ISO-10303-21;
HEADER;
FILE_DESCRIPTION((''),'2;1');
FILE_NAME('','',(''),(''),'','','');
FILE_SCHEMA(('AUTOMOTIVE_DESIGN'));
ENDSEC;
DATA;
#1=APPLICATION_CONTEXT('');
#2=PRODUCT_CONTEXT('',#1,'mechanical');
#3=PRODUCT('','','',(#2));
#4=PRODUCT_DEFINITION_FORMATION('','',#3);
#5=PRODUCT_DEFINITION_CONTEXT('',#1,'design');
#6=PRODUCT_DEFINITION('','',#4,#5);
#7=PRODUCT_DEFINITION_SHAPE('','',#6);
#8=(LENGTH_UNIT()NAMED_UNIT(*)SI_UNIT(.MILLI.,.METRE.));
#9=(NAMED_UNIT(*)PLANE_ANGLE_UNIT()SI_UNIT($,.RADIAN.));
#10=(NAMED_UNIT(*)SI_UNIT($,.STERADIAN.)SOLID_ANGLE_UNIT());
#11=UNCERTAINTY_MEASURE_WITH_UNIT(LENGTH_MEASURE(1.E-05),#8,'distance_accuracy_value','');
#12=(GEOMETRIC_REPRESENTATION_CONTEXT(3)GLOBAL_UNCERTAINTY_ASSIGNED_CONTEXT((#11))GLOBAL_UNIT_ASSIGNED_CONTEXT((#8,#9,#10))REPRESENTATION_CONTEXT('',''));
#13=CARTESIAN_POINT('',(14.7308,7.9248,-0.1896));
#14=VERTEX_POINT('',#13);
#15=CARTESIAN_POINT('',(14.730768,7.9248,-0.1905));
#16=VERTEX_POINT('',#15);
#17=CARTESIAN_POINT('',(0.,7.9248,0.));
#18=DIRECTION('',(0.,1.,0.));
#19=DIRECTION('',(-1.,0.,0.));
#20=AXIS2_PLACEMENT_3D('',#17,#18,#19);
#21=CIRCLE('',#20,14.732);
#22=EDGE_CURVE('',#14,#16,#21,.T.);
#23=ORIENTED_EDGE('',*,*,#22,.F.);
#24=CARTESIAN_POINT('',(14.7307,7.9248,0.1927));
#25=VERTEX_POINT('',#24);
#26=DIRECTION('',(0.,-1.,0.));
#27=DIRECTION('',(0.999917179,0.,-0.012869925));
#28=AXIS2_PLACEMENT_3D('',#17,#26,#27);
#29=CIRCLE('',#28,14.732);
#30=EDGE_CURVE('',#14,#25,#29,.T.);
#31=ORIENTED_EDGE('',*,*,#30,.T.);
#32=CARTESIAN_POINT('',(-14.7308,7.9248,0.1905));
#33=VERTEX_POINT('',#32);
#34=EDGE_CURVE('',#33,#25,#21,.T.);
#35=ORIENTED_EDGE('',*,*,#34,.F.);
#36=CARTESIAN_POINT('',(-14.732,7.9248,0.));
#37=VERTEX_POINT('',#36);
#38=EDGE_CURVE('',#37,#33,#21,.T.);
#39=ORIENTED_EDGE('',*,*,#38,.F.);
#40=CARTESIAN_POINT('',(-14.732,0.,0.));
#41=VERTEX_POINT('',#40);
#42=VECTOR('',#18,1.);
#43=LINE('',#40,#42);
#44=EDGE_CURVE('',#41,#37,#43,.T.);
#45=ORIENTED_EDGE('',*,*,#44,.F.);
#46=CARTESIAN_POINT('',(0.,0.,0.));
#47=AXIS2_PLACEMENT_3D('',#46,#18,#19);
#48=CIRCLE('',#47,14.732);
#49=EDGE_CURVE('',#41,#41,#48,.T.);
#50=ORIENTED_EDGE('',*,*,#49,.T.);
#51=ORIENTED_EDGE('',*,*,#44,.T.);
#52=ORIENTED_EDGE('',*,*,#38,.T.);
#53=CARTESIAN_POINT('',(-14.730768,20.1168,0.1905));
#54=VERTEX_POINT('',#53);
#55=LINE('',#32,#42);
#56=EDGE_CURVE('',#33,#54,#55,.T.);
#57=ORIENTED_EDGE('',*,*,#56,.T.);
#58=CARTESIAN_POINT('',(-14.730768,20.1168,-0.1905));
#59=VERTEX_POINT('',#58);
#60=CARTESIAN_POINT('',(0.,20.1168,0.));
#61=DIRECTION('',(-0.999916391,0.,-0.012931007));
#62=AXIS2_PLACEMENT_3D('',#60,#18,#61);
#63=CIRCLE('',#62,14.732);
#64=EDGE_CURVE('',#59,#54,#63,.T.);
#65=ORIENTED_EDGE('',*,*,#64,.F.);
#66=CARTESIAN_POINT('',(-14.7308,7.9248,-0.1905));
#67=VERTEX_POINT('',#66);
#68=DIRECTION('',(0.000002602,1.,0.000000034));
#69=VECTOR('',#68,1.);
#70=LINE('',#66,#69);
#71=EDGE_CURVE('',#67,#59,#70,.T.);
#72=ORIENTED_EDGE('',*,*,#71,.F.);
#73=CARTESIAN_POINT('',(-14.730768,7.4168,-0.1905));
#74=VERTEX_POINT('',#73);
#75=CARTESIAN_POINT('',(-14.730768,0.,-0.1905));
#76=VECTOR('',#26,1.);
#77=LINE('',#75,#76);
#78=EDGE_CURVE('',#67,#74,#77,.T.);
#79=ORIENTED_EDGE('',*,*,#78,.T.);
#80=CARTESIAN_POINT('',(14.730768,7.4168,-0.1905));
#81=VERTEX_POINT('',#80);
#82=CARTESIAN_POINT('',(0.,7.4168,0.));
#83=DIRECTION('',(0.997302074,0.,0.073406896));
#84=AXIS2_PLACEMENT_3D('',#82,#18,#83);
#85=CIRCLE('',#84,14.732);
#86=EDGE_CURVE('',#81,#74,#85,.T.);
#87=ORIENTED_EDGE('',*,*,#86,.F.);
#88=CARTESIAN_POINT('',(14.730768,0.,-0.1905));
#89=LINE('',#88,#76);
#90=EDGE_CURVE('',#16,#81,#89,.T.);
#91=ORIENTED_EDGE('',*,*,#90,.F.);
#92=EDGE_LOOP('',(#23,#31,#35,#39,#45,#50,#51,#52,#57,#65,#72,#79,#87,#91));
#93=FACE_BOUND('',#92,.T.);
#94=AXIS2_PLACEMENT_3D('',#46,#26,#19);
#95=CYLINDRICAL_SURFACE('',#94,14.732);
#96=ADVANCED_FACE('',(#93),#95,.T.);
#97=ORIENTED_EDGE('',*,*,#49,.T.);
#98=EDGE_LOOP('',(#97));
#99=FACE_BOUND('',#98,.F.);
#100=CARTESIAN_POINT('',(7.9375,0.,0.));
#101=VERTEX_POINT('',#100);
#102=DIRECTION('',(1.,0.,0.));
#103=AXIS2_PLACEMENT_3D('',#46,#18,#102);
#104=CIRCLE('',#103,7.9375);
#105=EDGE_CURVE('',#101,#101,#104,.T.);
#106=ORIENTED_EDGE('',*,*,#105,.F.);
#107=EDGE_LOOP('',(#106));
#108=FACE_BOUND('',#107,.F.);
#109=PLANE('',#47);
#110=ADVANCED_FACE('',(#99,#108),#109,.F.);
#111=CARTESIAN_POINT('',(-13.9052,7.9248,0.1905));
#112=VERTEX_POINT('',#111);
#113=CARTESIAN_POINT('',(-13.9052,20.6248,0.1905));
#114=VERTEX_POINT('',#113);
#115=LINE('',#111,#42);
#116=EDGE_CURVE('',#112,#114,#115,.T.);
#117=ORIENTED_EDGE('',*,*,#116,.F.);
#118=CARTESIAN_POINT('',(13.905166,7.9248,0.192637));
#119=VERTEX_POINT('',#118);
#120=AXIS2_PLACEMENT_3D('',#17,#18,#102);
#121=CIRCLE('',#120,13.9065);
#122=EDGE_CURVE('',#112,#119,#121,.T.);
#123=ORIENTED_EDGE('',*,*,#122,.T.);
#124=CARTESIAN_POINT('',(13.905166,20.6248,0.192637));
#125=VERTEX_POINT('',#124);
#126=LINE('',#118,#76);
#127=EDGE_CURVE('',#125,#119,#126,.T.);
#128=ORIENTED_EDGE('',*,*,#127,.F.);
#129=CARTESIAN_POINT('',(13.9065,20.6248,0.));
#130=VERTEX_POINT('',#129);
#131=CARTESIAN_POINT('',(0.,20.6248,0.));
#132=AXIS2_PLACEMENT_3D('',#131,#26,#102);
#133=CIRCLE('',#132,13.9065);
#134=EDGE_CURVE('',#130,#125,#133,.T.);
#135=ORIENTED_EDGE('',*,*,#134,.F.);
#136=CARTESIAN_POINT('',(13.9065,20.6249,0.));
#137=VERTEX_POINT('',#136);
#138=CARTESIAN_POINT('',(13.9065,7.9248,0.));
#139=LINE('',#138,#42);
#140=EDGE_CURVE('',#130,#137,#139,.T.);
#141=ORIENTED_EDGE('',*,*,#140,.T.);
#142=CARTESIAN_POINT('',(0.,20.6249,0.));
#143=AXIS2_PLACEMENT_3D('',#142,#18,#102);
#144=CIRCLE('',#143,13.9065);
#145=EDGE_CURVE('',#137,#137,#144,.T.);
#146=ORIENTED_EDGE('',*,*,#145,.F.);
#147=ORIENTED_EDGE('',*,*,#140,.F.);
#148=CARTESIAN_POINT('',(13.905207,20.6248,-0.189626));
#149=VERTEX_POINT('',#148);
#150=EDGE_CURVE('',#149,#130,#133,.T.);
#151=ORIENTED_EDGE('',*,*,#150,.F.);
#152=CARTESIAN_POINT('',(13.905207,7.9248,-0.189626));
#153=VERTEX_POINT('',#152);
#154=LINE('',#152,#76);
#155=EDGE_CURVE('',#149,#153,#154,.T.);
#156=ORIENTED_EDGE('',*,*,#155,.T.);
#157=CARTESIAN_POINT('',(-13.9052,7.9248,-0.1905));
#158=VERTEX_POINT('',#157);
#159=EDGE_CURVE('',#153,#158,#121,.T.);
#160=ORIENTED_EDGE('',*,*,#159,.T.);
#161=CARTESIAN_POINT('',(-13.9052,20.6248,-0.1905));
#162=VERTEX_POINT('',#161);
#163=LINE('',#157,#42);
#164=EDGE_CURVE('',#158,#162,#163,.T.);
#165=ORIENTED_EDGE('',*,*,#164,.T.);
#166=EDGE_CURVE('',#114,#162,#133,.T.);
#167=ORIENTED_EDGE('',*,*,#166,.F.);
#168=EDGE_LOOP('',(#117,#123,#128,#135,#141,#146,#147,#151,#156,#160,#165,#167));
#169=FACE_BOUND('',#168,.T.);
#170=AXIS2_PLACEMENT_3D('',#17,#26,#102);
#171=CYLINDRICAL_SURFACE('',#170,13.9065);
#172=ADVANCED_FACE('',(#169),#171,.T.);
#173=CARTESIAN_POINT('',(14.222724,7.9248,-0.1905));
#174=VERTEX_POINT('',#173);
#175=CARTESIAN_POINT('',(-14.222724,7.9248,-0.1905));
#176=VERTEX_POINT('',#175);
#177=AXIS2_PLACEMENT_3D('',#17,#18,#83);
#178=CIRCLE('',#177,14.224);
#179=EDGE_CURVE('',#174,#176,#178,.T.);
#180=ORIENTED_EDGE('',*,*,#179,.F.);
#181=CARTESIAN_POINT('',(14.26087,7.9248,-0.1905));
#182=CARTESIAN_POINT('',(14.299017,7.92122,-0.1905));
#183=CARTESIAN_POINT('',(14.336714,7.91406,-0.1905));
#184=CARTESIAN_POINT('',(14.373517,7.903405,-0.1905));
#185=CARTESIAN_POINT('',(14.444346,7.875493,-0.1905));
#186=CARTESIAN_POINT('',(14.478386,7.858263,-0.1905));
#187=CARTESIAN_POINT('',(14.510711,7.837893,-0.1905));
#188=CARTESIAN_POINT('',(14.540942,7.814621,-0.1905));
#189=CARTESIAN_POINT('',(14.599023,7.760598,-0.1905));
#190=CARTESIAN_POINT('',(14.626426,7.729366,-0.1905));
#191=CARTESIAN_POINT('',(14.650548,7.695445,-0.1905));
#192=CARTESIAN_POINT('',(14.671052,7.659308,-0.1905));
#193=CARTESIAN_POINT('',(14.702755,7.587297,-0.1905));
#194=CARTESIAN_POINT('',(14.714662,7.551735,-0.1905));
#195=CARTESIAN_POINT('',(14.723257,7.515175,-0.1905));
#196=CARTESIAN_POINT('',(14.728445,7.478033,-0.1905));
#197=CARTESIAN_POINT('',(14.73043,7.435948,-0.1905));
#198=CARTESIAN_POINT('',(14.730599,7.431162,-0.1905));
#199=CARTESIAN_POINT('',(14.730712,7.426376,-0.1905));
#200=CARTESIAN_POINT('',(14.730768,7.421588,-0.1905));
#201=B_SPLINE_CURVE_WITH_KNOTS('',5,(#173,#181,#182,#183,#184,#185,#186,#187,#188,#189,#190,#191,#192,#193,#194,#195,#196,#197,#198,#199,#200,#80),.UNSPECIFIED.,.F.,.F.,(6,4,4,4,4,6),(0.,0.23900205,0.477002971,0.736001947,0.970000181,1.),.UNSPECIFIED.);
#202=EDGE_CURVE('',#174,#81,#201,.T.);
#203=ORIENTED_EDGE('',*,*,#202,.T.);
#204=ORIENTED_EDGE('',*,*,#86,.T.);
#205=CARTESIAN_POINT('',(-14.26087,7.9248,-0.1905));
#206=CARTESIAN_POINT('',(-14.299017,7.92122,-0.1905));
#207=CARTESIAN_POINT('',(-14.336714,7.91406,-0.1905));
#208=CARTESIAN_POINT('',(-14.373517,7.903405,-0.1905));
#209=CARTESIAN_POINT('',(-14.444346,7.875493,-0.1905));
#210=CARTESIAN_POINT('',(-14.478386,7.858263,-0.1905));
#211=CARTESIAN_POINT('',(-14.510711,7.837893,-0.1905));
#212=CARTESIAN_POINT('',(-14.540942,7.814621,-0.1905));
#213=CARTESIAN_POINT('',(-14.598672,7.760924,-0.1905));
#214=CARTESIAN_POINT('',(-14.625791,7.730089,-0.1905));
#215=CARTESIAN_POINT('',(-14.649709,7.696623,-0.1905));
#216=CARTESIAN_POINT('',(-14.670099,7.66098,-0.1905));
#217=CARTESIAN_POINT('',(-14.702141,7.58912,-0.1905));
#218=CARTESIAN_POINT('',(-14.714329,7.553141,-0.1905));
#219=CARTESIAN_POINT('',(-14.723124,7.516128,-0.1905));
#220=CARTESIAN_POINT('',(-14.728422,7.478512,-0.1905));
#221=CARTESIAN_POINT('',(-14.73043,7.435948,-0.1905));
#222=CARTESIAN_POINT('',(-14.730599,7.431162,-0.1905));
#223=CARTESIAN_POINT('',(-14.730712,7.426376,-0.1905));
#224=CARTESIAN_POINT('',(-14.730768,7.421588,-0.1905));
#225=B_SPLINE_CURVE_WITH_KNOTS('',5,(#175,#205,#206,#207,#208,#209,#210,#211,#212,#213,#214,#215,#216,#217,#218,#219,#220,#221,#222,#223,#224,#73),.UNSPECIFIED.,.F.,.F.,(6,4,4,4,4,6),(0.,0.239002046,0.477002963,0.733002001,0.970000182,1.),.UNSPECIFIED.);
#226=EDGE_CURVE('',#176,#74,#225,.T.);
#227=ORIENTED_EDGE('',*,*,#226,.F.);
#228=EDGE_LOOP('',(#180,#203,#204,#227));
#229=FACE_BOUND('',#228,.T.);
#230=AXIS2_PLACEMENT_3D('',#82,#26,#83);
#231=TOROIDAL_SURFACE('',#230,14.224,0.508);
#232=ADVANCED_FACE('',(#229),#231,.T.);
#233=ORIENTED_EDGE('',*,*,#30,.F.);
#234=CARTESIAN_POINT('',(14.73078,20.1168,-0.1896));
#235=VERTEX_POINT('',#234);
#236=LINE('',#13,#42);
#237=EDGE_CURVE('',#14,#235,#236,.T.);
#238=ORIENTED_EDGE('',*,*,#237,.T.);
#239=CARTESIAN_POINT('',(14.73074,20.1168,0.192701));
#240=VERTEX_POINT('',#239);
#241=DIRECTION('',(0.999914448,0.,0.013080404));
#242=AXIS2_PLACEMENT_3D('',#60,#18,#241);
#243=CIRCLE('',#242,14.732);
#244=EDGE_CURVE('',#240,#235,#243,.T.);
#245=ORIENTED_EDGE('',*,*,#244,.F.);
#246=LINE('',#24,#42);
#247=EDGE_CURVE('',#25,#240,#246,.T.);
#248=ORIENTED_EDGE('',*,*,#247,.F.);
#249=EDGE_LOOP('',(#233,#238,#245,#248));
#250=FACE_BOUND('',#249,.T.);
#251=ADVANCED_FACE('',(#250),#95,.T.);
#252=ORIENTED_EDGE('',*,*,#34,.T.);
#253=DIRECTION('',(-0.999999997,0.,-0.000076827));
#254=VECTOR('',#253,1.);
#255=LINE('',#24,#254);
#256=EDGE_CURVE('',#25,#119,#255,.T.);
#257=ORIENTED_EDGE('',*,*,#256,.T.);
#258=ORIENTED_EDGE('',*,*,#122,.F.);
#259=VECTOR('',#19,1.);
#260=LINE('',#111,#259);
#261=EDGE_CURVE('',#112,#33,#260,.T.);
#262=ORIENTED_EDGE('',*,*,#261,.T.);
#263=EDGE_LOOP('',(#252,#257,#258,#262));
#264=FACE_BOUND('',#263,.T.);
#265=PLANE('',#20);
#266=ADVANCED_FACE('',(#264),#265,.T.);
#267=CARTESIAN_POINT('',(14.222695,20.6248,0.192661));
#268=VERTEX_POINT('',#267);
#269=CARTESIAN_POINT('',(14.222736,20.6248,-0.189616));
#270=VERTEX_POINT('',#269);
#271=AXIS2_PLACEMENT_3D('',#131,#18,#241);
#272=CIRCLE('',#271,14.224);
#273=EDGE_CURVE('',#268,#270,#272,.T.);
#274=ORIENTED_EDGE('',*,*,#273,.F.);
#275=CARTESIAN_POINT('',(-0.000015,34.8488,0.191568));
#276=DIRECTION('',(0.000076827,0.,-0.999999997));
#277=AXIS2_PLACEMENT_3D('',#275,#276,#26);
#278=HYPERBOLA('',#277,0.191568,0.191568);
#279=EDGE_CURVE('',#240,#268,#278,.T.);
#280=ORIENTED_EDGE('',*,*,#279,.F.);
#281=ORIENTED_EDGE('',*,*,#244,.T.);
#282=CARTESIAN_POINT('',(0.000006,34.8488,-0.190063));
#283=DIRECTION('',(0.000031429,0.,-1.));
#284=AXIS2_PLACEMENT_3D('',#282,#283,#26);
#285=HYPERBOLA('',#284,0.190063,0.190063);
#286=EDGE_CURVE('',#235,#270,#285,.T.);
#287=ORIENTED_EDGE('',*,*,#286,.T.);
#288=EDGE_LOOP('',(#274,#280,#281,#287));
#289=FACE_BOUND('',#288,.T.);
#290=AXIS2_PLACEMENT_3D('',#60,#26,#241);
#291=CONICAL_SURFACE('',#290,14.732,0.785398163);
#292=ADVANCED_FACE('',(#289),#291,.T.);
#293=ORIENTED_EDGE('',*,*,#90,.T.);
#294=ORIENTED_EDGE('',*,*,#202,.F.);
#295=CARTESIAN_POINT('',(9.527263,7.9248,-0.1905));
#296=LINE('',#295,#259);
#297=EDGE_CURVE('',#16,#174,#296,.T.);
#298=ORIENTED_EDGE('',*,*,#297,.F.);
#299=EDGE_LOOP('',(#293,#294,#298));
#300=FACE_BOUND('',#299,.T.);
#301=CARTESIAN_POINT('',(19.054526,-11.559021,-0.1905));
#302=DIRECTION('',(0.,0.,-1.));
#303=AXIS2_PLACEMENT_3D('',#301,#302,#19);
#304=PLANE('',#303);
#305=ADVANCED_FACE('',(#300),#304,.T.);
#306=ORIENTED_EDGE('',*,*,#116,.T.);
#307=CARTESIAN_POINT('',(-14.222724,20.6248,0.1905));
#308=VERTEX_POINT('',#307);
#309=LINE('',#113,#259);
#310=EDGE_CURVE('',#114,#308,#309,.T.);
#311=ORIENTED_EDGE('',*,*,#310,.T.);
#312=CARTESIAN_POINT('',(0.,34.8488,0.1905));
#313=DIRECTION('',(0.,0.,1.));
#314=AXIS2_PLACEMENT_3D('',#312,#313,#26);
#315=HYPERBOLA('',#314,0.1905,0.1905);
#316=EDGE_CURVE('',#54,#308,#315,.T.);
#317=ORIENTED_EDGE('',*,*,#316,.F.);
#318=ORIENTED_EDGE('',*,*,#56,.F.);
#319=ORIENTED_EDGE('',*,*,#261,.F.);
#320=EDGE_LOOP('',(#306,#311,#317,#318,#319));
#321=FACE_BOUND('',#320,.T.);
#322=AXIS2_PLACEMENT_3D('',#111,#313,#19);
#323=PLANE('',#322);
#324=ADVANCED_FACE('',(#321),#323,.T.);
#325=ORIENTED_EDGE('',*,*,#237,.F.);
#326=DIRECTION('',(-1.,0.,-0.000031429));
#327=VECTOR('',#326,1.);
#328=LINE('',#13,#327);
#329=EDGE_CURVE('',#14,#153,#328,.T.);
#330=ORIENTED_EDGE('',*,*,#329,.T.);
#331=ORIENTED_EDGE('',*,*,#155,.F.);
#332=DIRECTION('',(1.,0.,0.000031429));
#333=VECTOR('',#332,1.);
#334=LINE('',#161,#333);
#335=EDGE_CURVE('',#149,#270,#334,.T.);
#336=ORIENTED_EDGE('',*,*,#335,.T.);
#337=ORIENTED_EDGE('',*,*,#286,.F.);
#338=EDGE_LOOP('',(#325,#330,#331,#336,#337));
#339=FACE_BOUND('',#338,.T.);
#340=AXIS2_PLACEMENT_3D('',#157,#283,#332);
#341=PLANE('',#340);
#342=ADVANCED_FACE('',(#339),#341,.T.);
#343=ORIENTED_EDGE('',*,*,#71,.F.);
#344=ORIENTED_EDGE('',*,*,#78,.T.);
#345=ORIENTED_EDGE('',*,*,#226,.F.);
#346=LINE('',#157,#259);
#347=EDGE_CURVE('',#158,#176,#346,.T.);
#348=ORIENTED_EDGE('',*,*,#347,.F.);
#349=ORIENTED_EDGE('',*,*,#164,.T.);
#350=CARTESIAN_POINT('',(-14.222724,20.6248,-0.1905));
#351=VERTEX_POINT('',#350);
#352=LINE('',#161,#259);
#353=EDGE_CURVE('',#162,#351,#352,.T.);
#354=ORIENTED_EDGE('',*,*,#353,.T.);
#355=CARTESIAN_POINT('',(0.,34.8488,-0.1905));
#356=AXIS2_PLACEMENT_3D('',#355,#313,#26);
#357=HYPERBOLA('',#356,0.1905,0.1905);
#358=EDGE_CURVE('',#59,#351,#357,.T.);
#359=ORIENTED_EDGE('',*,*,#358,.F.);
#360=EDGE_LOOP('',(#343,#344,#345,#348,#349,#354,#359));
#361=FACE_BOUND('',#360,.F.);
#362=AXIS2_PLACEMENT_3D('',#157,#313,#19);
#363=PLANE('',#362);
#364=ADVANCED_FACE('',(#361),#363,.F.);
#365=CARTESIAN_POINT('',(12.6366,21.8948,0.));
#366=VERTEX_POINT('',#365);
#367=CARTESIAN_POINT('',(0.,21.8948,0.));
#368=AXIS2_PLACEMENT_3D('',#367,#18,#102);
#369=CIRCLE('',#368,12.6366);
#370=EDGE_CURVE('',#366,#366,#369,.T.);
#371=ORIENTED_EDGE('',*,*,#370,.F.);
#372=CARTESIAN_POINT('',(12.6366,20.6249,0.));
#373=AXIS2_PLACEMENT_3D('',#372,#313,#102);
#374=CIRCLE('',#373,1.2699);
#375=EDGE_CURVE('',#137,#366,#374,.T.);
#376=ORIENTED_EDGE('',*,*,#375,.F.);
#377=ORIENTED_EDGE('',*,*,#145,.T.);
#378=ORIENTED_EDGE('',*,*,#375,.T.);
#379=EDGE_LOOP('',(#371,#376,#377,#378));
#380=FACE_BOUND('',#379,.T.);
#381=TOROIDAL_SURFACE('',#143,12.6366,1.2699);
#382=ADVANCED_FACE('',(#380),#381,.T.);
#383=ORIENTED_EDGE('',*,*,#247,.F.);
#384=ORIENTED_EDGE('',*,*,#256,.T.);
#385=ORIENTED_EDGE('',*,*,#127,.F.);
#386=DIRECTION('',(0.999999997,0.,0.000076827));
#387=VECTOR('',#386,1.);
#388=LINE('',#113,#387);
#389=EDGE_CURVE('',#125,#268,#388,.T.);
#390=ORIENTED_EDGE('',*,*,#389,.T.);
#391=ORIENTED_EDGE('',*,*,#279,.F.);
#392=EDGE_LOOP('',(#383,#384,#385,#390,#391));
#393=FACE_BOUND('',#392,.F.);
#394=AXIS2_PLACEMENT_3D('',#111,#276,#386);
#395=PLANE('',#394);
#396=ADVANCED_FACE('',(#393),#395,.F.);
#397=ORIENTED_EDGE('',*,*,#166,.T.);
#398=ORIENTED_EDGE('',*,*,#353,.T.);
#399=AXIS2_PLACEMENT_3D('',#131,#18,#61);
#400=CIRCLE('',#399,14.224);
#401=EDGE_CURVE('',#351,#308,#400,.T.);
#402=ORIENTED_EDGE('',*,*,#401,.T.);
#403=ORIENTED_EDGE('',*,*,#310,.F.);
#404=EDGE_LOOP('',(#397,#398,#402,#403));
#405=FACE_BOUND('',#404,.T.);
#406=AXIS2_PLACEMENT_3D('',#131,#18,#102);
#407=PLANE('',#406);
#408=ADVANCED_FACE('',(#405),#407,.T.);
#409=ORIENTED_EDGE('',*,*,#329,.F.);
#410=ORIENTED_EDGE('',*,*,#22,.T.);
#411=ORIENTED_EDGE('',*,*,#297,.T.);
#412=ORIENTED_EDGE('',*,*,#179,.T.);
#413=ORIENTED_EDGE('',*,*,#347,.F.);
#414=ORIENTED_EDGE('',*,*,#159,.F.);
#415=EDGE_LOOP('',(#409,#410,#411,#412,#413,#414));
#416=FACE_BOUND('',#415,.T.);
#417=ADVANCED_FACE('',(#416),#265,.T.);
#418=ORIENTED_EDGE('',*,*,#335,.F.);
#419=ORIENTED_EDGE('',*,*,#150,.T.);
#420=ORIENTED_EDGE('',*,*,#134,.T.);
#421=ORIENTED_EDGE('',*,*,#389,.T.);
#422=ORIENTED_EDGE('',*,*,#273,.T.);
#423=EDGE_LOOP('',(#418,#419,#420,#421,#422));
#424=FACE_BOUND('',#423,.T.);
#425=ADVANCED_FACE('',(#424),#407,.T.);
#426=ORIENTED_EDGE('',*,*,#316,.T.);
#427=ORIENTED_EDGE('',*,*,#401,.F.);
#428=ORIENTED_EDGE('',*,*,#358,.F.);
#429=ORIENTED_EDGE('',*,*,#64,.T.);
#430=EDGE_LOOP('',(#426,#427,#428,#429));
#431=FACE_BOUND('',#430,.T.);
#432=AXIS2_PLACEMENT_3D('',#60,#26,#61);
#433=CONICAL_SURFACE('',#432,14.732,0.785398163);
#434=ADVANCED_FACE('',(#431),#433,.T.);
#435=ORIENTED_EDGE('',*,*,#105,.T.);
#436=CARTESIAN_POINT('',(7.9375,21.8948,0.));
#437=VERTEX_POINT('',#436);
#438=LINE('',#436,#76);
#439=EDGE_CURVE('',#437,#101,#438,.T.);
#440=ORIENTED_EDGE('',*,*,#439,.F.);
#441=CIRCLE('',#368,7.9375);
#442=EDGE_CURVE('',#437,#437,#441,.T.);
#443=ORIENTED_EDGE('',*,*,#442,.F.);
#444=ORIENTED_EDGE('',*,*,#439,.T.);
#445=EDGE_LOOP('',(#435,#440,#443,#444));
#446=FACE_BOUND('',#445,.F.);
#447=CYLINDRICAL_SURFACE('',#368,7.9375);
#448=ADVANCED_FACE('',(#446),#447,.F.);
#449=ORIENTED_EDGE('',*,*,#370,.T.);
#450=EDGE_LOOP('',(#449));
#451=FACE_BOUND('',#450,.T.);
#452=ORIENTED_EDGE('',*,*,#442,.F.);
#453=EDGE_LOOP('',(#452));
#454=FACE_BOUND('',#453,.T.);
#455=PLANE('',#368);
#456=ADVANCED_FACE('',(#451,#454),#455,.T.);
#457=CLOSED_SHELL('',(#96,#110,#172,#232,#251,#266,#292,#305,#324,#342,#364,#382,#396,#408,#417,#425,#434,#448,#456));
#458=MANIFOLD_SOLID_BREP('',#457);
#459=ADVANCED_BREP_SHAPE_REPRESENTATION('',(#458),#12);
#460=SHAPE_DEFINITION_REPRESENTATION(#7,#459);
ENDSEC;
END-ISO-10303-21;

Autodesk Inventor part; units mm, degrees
ref_plane "YZ Plane" through (0, 0, 0) normal (1, 0, 0) x (0, 1, 0)
ref_plane "XZ Plane" through (0, 0, 0) normal (0, 1, 0) x (-1, 0, 0)
ref_plane "XY Plane" through (0, 0, 0) normal (0, 0, 1) x (1, 0, 0)
sketch "Sketch1" plane through (0, 0, 0) normal (0, 1, 0) x (-1, 0, 0)
  circle A0 centre (0, 0) radius 14.732
  dimension "d0" = 29.464
extrude "Extrusion1" add sketch "Sketch1" along normal blind 7.9248
sketch "Sketch2" plane through (0, 7.9248, 0) normal (0, 1, 0) x (1, 0, 0)
  circle A0 centre (0, 0) radius 14.732 projected
  circle A1 centre (0, 0) radius 13.9065
  dimension "d3" = 27.813
extrude "Extrusion2" add sketch "Sketch2" along normal blind 13.97 contours A1
sketch "Sketch4" plane through (0, 7.9248, 0) normal (0, 1, 0) x (1, 0, 0)
  circle A0 centre (0, 0) radius 13.9065 projected
  circle A1 centre (0, 0) radius 14.732 projected
  circle A2 centre (0, 0) radius 13.9065
  circle A3 centre (0, 0) radius 14.732
  line L0 (-13.905, 0.2046) -> (-13.0794, 0.2046) construction
  line L1 (-13.9052, 0.1905) -> (-14.7308, 0.1905)
  line L2 (-13.9052, 0.1905) -> (-13.0796, 0.1905) construction
  line L3 (-13.9052, -0.1905) -> (-14.7308, -0.1905)
  line L4 (-13.9052, -0.1905) -> (-13.0796, -0.1905) construction
  line L5 (-13.9052, 0.1905) -> (14.7308, 0.1896)
  line L6 (-13.9052, -0.1905) -> (14.7307, -0.1927)
  dimension "d7" = 180
  dimension "d8" = 180
extrude "Extrusion3" add sketch "Sketch4" along normal blind 12.7 contours L5 A0 L6 | A0 L3 A1 L1 | L5 A1 L6 A0
chamfer "Chamfer1" distance 0.508 angle 45 1 edges at (14.732, 20.6248, 0.0015)
chamfer "Chamfer2" distance 0.508 angle 45 1 edges at (-14.732, 20.6248, 0)
fillet "Fillet1" radius 1.27 1 edges at (-13.9065, 21.8948, 0)
fillet "Fillet2" radius 0.508 1 edges at (0.0004, 7.9248, -14.732)
sketch "Sketch5" plane through (0, 21.8948, 0) normal (0, 1, 0) x (1, 0, 0)
  circle A0 centre (0, 0) radius 12.6365 projected
  circle A1 centre (0, 0) radius 7.9375
  dimension "d19" = 15.875
extrude "Extrusion4" cut sketch "Sketch5" against normal blind 25.4 contours A1
properties part number "Pipe T with a hole in it"
